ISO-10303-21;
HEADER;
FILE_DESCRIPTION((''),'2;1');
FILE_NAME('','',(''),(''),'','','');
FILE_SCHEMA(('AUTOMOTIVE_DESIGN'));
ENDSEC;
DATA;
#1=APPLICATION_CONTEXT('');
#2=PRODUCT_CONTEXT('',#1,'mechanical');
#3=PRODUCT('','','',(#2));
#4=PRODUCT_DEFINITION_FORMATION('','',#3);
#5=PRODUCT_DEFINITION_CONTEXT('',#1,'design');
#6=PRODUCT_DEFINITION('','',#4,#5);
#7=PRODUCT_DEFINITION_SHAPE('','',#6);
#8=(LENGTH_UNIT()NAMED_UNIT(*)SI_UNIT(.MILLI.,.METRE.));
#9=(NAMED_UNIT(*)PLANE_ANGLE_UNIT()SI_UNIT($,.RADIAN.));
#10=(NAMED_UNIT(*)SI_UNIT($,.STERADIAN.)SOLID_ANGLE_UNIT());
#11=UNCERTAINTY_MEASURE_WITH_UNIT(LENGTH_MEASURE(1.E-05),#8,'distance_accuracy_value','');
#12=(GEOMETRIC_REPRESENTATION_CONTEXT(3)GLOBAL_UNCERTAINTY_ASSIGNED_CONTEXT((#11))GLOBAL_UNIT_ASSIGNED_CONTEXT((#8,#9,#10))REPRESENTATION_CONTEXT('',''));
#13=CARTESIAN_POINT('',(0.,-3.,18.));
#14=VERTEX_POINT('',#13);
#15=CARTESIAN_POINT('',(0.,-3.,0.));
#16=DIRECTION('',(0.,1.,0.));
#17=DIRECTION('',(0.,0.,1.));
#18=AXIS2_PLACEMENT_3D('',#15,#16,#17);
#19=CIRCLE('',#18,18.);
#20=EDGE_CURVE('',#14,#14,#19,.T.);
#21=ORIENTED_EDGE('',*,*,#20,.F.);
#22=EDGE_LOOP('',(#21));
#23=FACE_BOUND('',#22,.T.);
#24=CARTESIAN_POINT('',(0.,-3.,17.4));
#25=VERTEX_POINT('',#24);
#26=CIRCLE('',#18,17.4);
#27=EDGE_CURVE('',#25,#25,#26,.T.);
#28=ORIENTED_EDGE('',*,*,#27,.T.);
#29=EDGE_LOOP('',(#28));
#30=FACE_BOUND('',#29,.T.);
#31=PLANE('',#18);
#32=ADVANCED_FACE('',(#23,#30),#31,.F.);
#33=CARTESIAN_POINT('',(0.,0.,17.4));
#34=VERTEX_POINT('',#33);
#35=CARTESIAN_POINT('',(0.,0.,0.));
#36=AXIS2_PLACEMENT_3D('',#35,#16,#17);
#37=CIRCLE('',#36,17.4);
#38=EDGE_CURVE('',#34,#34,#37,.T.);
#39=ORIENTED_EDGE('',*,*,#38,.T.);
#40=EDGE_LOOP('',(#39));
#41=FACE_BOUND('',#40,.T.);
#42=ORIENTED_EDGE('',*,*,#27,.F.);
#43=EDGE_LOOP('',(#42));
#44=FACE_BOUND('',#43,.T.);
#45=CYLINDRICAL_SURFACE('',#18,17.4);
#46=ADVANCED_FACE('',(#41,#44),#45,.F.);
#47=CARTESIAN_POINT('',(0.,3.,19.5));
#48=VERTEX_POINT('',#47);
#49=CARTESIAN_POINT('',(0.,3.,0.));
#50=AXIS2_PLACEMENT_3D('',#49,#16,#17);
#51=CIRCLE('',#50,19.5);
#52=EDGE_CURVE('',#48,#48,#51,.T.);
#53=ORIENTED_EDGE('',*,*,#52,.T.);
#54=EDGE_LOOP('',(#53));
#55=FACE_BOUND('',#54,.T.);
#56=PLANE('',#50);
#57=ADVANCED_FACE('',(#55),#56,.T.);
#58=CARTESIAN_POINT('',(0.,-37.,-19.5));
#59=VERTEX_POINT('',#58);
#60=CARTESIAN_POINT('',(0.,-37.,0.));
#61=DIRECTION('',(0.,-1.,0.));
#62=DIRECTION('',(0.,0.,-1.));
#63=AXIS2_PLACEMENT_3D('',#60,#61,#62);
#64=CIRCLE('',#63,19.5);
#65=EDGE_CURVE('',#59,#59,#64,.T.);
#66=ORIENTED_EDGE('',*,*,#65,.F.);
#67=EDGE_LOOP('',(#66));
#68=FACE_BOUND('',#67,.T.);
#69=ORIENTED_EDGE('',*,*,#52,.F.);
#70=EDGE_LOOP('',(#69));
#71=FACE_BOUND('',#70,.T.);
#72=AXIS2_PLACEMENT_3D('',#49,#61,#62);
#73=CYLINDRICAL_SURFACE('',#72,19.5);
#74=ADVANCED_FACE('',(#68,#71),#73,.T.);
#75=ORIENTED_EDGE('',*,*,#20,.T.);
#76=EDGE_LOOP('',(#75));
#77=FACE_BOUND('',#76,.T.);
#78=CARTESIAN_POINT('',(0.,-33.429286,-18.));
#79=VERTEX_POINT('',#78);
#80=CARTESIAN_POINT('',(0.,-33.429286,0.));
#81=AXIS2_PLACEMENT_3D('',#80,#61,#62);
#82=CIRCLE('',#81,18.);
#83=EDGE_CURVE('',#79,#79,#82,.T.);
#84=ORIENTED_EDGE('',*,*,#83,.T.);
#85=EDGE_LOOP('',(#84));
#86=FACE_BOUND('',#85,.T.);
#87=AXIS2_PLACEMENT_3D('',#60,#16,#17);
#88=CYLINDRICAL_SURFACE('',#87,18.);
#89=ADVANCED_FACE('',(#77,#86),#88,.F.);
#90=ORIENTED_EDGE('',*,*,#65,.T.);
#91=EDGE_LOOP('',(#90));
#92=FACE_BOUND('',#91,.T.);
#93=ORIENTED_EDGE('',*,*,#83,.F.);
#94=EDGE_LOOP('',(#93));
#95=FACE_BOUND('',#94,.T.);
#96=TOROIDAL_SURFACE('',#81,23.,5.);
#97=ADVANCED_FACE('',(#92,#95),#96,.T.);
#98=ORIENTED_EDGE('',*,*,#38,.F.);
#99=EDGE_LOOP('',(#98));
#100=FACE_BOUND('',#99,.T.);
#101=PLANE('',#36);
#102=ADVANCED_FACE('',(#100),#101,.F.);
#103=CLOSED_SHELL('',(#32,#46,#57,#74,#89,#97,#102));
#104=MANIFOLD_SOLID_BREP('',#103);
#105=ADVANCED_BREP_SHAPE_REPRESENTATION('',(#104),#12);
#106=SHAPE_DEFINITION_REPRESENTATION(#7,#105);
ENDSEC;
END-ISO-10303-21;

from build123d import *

# Parameters (mm, degrees)
SKETCH1_R           = 19.5
BOSS_EXTRUDE1_DEPTH = 3
BOSS_EXTRUDE2_START = 37
SKETCH2_R           = 19.5
SKETCH2_R_2         = 18
BOSS_EXTRUDE2_DEPTH = 37
FILLET1_R           = 5
BOSS_EXTRUDE3_START = -6
SKETCH3_R           = 18
SKETCH3_R_2         = 17.4
BOSS_EXTRUDE3_DEPTH = 6


with BuildPart() as part:
    # Sketch1 → Boss-Extrude1 (new body)
    with BuildSketch(Plane(origin=(0, 0, 0), x_dir=(1, 0, 0), z_dir=(0, 1, 0))):
        with Locations(Location((0, 0, 0), (0, 0, 270))):
            Circle(SKETCH1_R)
    extrude(amount=BOSS_EXTRUDE1_DEPTH)

    # Sketch2 → Boss-Extrude2 (add)
    with BuildSketch(Plane(origin=(0, 0, 0), x_dir=(-1, 0, 0), z_dir=(0, -1, 0)).offset(BOSS_EXTRUDE2_START)):
        with Locations(Location((0, 0, 0), (0, 0, 90))):
            Circle(SKETCH2_R)
        with Locations(Location((0, 0, 0), (0, 0, 90))):
            Circle(SKETCH2_R_2, mode=Mode.SUBTRACT)
    extrude(amount=-BOSS_EXTRUDE2_DEPTH)

    # Fillet1
    # the kernel refuses this fillet: 5 mm, written as the material it takes off along each edge
    with BuildSketch(Plane(origin=(0, -37, 0), x_dir=(0, 0, -1), z_dir=(-1, 0, 0))) as fillet1_piece_1:
        with BuildLine():
            CenterArc((23, -3.570714214), FILLET1_R, 134.427004001, 45.572995999)
            Line((18, -3.570714214), (17.9, -3.570714214))
            Line((17.9, -3.570714214), (17.9, 0))
            Line((17.9, 0), (18, 0.1))
            ThreePointArc((18, 0.1), (18.75, 0.1), (19.43, 0.071414284))
            Line((19.43, 0.071414284), (19.5, 0))
        make_face()
    revolve(axis=Axis((0, -37, 0), (0, -1, 0)), mode=Mode.SUBTRACT)

    # Sketch3 → Boss-Extrude3 (add)
    with BuildSketch(Plane(origin=(0, 3, 0), x_dir=(1, 0, 0), z_dir=(0, 1, 0)).offset(BOSS_EXTRUDE3_START)):
        with Locations(Location((0, 0, 0), (0, 0, 270))):
            Circle(SKETCH3_R)
        with Locations(Location((0, 0, 0), (0, 0, 270))):
            Circle(SKETCH3_R_2, mode=Mode.SUBTRACT)
    extrude(amount=BOSS_EXTRUDE3_DEPTH)


solid = part.part
